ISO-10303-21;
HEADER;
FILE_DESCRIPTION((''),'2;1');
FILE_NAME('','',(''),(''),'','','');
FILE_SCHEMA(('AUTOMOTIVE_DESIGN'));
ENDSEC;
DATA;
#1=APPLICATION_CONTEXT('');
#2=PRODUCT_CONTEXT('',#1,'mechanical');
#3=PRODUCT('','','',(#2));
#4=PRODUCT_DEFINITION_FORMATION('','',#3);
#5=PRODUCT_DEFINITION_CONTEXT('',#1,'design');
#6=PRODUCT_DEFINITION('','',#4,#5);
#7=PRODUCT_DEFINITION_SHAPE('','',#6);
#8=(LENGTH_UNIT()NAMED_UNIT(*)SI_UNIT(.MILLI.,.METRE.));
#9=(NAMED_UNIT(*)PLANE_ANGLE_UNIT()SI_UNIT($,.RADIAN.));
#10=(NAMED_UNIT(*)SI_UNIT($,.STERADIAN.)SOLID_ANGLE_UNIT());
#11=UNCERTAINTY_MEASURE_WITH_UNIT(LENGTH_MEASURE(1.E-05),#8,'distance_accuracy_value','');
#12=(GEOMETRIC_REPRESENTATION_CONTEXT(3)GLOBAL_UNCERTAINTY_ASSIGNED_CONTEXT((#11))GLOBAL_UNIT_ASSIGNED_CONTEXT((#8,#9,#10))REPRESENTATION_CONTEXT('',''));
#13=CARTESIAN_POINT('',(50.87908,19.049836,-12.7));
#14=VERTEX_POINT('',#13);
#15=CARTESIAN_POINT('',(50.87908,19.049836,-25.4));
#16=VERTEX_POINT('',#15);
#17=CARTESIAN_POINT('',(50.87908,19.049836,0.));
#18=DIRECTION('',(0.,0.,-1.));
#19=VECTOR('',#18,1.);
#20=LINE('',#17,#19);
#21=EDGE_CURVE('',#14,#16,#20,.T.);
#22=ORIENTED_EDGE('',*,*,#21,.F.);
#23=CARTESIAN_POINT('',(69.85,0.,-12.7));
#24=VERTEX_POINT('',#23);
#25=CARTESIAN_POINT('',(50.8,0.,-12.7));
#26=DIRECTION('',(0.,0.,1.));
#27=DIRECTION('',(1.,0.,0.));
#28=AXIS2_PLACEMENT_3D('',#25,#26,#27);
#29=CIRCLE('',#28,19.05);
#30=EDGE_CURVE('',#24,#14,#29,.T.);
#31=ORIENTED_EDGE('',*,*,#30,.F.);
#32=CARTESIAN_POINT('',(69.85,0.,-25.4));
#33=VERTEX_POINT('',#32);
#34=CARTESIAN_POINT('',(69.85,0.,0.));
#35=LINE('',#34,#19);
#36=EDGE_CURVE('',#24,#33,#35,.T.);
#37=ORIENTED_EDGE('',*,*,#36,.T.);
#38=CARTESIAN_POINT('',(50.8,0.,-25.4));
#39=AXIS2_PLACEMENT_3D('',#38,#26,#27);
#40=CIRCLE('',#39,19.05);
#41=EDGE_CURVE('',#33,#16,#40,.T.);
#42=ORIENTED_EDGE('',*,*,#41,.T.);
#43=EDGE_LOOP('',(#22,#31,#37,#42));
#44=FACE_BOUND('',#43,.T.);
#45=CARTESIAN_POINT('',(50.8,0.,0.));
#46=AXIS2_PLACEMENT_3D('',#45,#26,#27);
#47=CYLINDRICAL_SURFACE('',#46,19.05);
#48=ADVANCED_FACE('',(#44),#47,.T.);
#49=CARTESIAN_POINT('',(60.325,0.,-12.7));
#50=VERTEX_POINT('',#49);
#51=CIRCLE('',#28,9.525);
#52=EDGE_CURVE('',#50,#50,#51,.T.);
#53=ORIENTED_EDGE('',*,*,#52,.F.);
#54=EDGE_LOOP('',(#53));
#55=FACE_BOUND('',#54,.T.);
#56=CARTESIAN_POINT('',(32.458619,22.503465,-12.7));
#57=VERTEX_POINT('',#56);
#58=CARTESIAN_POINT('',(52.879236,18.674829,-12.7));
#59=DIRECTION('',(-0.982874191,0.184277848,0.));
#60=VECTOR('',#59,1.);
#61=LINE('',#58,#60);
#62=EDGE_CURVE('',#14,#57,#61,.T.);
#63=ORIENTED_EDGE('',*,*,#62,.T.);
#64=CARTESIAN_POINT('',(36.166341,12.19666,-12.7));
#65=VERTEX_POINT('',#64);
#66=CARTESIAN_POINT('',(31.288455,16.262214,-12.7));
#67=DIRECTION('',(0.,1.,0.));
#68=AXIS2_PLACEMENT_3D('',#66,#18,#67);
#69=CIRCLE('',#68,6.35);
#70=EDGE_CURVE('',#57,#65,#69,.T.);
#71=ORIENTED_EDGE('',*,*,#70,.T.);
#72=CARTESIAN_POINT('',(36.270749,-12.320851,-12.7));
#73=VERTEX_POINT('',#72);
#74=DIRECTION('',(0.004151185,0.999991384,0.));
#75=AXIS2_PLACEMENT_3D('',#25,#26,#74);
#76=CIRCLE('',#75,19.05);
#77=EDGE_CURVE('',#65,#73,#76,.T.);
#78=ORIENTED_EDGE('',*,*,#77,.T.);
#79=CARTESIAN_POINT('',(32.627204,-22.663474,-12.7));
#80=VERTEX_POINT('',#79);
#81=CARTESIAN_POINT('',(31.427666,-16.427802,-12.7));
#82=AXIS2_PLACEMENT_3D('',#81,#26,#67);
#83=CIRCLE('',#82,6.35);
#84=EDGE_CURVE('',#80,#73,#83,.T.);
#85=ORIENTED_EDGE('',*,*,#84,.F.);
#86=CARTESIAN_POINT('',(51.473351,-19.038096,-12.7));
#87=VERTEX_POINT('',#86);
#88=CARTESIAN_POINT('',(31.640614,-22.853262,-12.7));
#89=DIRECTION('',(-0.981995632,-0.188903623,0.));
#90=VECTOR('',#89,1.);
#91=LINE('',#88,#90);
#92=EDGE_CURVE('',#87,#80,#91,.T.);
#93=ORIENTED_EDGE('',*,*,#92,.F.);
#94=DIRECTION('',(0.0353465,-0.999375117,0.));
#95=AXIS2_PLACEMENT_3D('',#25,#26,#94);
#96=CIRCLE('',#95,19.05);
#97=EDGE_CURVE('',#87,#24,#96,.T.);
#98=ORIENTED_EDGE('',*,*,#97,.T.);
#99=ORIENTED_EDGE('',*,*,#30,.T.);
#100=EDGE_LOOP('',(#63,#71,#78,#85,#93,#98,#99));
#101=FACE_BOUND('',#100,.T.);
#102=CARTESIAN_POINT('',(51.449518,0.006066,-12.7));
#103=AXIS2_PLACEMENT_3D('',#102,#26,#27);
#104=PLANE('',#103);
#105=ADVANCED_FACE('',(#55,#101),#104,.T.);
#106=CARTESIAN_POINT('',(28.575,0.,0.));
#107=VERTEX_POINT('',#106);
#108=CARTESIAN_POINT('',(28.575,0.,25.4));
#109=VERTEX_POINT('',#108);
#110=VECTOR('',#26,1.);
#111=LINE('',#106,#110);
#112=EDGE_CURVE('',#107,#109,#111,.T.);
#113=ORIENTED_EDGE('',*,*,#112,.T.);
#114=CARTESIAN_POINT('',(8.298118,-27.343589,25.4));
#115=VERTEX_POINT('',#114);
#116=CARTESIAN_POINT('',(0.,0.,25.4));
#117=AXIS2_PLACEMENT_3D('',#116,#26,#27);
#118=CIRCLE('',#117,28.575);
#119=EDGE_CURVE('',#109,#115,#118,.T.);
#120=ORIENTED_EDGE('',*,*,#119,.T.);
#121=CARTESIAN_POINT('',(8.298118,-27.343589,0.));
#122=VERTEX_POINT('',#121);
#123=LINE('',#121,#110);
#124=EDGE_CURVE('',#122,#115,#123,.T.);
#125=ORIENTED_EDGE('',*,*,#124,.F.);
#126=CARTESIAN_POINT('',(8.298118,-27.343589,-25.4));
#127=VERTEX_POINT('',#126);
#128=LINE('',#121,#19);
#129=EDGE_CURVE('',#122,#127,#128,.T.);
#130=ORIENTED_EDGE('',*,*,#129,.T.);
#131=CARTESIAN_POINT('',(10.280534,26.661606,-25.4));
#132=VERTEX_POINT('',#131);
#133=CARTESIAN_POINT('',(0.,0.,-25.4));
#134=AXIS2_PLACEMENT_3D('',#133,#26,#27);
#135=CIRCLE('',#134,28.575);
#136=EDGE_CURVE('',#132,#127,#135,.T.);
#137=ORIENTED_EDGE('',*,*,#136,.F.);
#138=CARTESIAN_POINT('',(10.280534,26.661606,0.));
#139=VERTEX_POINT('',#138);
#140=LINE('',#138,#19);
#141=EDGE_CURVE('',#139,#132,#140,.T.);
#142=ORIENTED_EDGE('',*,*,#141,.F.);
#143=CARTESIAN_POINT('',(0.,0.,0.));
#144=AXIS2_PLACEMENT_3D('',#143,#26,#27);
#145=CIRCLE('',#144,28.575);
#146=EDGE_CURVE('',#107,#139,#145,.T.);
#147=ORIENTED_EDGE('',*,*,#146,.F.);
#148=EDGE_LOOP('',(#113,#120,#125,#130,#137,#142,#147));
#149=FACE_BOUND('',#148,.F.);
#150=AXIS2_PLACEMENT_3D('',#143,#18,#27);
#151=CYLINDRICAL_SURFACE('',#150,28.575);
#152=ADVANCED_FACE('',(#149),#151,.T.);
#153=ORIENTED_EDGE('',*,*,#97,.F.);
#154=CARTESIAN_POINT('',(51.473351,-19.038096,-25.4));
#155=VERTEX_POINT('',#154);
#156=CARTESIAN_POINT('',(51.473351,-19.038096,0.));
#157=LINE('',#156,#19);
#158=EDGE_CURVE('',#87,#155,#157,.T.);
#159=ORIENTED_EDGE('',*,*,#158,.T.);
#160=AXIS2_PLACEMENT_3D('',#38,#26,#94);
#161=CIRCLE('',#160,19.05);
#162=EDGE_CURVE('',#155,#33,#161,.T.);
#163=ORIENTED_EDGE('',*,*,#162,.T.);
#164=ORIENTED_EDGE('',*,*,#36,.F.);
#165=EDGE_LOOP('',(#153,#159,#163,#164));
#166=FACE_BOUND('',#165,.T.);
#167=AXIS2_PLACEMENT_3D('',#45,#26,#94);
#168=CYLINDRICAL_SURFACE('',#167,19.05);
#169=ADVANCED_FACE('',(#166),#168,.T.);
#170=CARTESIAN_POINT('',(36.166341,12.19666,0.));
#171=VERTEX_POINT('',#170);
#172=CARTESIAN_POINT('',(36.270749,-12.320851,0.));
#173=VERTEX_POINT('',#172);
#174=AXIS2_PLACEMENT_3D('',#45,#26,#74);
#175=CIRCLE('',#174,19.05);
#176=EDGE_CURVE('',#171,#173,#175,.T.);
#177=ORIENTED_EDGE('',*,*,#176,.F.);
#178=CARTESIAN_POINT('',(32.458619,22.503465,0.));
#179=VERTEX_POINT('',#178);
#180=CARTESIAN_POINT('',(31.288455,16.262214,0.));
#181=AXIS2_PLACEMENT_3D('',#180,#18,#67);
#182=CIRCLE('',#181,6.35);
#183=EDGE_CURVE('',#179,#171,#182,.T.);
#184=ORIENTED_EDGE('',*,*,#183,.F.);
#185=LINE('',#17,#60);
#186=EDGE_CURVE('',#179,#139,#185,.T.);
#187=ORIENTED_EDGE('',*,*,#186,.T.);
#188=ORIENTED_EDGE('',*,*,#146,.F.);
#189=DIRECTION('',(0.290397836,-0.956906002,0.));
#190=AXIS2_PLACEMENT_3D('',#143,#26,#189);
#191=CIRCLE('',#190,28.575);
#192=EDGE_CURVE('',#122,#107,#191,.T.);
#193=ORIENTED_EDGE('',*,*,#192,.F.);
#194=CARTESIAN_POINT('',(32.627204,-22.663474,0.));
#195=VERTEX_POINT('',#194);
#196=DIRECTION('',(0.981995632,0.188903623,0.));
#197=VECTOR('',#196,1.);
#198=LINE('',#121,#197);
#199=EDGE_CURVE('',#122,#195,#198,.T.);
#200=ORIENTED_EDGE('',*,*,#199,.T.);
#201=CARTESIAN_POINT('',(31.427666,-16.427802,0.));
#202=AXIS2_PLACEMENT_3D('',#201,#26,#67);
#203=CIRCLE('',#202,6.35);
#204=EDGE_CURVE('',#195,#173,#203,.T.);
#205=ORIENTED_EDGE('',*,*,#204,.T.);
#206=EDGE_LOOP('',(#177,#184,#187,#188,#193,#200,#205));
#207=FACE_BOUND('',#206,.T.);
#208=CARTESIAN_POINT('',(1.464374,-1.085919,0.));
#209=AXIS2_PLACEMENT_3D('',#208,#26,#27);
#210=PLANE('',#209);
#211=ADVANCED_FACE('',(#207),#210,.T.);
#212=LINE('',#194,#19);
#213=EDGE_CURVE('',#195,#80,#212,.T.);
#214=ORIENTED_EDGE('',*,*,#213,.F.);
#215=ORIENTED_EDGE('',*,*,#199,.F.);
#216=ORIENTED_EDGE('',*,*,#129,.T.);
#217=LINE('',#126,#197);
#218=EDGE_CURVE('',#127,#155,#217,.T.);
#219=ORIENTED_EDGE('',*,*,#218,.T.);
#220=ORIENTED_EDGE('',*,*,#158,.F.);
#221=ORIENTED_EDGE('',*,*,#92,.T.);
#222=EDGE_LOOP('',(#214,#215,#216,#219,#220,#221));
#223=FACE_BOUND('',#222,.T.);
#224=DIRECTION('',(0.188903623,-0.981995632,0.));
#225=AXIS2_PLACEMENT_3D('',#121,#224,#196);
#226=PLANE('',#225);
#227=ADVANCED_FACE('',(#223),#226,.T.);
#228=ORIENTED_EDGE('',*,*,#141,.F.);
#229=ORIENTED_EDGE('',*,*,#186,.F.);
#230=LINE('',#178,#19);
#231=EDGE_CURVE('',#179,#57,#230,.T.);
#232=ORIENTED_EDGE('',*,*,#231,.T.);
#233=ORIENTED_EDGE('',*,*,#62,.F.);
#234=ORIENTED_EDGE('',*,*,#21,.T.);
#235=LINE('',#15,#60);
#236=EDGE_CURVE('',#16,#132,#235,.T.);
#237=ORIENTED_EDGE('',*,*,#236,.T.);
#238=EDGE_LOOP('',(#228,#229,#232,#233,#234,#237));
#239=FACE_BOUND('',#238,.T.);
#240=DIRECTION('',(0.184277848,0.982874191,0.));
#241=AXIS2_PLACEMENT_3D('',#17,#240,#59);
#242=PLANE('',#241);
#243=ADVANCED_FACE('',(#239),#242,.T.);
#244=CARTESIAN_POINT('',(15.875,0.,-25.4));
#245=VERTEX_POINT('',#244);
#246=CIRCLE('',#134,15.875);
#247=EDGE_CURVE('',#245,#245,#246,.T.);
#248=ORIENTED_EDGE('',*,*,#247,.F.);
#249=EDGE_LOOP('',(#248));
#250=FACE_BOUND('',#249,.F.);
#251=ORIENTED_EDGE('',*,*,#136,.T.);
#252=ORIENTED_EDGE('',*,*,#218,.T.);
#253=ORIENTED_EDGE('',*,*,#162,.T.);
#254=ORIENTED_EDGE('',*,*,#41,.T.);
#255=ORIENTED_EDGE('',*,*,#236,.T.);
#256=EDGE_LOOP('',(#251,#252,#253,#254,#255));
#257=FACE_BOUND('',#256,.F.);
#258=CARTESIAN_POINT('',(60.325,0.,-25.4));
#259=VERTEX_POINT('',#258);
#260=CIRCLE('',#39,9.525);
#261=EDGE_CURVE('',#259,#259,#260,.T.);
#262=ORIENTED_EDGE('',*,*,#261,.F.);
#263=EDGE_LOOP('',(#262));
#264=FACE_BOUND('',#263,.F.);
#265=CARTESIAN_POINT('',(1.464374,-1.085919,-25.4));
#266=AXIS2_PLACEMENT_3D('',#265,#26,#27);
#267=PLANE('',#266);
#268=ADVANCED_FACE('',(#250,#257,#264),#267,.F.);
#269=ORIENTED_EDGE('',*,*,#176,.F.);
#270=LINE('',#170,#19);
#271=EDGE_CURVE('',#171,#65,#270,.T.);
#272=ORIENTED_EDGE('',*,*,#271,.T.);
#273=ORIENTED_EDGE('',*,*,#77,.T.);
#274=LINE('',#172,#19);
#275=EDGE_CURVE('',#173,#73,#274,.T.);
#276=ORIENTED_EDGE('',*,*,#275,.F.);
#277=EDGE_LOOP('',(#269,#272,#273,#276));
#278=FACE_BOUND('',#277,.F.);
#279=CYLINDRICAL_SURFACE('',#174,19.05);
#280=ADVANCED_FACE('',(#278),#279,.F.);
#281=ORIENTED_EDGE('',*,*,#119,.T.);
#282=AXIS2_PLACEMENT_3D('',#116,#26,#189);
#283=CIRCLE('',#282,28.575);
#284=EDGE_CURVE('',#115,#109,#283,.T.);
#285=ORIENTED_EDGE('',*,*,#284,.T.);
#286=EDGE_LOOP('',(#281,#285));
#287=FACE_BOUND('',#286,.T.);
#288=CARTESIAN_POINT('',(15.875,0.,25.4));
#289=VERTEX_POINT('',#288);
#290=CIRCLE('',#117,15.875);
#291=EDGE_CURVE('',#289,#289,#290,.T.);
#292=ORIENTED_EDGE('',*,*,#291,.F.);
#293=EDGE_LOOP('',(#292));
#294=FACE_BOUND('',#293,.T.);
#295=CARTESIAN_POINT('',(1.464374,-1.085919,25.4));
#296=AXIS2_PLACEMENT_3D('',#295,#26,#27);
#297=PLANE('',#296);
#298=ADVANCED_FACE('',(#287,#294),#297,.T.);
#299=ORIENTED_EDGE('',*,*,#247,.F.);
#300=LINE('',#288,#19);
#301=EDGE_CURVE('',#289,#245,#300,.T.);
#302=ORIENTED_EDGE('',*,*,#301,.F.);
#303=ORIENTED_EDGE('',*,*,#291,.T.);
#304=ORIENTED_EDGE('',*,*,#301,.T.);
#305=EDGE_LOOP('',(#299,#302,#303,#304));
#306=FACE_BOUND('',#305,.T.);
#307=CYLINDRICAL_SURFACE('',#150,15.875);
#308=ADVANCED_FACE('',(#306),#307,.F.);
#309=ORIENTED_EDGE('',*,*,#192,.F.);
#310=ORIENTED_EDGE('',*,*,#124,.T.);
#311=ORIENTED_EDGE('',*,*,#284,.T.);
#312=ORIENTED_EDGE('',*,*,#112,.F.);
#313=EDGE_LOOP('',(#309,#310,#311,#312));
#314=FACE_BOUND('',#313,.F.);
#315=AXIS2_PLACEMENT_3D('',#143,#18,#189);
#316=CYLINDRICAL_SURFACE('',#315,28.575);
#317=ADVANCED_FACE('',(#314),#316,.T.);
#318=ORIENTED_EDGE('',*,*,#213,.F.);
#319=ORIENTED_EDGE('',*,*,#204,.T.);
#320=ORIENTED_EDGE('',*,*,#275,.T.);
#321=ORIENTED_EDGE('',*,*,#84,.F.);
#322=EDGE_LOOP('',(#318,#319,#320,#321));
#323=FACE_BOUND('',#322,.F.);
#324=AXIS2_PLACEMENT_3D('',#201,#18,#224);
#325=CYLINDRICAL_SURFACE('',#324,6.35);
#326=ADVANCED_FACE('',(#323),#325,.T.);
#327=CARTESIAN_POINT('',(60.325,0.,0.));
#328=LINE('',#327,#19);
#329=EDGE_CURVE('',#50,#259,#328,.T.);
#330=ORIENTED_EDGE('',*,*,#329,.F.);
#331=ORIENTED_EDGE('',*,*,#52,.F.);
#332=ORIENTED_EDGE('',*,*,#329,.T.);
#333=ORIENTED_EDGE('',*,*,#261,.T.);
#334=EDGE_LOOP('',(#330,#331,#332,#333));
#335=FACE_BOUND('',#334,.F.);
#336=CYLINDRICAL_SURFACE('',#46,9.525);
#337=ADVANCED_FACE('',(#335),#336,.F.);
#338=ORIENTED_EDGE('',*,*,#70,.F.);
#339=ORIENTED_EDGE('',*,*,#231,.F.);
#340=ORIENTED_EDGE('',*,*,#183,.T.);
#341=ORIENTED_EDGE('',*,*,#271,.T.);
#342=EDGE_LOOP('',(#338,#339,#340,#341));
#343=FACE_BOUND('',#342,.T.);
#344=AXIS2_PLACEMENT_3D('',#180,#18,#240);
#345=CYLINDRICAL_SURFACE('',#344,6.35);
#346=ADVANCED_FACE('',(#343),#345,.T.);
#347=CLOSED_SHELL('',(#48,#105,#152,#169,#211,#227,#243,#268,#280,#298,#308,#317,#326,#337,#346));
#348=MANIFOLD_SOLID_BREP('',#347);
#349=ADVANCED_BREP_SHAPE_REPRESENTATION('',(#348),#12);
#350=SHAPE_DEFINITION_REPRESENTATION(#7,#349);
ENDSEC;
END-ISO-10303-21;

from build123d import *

# Parameters (mm, degrees)
F0_R     = 15.875
F0_R_2   = 9.525
F1_DEPTH = 25.4
F2_DEPTH = 25.4
F3_DEPTH = 12.7
F4_R     = 6.35


with BuildPart() as f1:
    # F0 (on Top) → F1 (new body)
    with BuildSketch(Plane.XY):
        with BuildLine():
            ThreePointArc((8.2981181618, -27.3435890105), (22.9526616264, -17.0207505493), (28.575, 0))
            ThreePointArc((28.575, 0), (23.5615881585, 16.16731853), (10.2805336167, 26.6616063574))
            ThreePointArc((10.2805336167, 26.6616063574), (-28.5557674937, 1.0482212761), (8.2981181618, -27.3435890105))
        make_face()
        Circle(F0_R, mode=Mode.SUBTRACT)
        with BuildLine():
            ThreePointArc((69.85, 0), (64.2983142533, 13.442396078), (50.8790800715, 19.0498358613))
            ThreePointArc((50.8790800715, 19.0498358613), (31.7523183533, -0.2971933484), (51.4733508184, -19.0380959835))
            ThreePointArc((51.4733508184, -19.0380959835), (64.5063823289, -13.2301770001), (69.85, 0))
        make_face()
        with Locations((50.8, 0)):
            Circle(F0_R_2, mode=Mode.SUBTRACT)
        with BuildLine():
            ThreePointArc((10.2805336167, 26.6616063574), (23.5615881585, 16.16731853), (28.575, 0))
            ThreePointArc((28.575, 0), (22.9526616264, -17.0207505493), (8.2981181618, -27.3435890105))
            Line((8.2981181618, -27.3435890105), (51.4733508184, -19.0380959835))
            ThreePointArc((51.4733508184, -19.0380959835), (31.7523183533, -0.2971933484), (50.8790800715, 19.0498358613))
            Line((50.8790800715, 19.0498358613), (10.2805336167, 26.6616063574))
        make_face()
    extrude(amount=-F1_DEPTH)

    # F0 (on Top) → F2 (join)
    with BuildSketch(Plane.XY):
        with BuildLine():
            ThreePointArc((8.2981181618, -27.3435890105), (22.9526616264, -17.0207505493), (28.575, 0))
            ThreePointArc((28.575, 0), (23.5615881585, 16.16731853), (10.2805336167, 26.6616063574))
            ThreePointArc((10.2805336167, 26.6616063574), (-28.5557674937, 1.0482212761), (8.2981181618, -27.3435890105))
        make_face()
        Circle(F0_R, mode=Mode.SUBTRACT)
    extrude(amount=F2_DEPTH)

    # F0 (on Top) → F3 (cut)
    with BuildSketch(Plane.XY):
        with BuildLine():
            ThreePointArc((69.85, 0), (64.2983142533, 13.442396078), (50.8790800715, 19.0498358613))
            ThreePointArc((50.8790800715, 19.0498358613), (31.7523183533, -0.2971933484), (51.4733508184, -19.0380959835))
            ThreePointArc((51.4733508184, -19.0380959835), (64.5063823289, -13.2301770001), (69.85, 0))
        make_face()
        with Locations((50.8, 0)):
            Circle(F0_R_2, mode=Mode.SUBTRACT)
    extrude(amount=-F3_DEPTH, mode=Mode.SUBTRACT)

    # F4
    f4_edges = [f1.edges().sort_by_distance(p)[0] for p in [
        (51.473351, -19.038096, -6.35),
        (50.87908, 19.049836, -6.35),
    ]]
    fillet(f4_edges, radius=F4_R)


solid = f1.part
